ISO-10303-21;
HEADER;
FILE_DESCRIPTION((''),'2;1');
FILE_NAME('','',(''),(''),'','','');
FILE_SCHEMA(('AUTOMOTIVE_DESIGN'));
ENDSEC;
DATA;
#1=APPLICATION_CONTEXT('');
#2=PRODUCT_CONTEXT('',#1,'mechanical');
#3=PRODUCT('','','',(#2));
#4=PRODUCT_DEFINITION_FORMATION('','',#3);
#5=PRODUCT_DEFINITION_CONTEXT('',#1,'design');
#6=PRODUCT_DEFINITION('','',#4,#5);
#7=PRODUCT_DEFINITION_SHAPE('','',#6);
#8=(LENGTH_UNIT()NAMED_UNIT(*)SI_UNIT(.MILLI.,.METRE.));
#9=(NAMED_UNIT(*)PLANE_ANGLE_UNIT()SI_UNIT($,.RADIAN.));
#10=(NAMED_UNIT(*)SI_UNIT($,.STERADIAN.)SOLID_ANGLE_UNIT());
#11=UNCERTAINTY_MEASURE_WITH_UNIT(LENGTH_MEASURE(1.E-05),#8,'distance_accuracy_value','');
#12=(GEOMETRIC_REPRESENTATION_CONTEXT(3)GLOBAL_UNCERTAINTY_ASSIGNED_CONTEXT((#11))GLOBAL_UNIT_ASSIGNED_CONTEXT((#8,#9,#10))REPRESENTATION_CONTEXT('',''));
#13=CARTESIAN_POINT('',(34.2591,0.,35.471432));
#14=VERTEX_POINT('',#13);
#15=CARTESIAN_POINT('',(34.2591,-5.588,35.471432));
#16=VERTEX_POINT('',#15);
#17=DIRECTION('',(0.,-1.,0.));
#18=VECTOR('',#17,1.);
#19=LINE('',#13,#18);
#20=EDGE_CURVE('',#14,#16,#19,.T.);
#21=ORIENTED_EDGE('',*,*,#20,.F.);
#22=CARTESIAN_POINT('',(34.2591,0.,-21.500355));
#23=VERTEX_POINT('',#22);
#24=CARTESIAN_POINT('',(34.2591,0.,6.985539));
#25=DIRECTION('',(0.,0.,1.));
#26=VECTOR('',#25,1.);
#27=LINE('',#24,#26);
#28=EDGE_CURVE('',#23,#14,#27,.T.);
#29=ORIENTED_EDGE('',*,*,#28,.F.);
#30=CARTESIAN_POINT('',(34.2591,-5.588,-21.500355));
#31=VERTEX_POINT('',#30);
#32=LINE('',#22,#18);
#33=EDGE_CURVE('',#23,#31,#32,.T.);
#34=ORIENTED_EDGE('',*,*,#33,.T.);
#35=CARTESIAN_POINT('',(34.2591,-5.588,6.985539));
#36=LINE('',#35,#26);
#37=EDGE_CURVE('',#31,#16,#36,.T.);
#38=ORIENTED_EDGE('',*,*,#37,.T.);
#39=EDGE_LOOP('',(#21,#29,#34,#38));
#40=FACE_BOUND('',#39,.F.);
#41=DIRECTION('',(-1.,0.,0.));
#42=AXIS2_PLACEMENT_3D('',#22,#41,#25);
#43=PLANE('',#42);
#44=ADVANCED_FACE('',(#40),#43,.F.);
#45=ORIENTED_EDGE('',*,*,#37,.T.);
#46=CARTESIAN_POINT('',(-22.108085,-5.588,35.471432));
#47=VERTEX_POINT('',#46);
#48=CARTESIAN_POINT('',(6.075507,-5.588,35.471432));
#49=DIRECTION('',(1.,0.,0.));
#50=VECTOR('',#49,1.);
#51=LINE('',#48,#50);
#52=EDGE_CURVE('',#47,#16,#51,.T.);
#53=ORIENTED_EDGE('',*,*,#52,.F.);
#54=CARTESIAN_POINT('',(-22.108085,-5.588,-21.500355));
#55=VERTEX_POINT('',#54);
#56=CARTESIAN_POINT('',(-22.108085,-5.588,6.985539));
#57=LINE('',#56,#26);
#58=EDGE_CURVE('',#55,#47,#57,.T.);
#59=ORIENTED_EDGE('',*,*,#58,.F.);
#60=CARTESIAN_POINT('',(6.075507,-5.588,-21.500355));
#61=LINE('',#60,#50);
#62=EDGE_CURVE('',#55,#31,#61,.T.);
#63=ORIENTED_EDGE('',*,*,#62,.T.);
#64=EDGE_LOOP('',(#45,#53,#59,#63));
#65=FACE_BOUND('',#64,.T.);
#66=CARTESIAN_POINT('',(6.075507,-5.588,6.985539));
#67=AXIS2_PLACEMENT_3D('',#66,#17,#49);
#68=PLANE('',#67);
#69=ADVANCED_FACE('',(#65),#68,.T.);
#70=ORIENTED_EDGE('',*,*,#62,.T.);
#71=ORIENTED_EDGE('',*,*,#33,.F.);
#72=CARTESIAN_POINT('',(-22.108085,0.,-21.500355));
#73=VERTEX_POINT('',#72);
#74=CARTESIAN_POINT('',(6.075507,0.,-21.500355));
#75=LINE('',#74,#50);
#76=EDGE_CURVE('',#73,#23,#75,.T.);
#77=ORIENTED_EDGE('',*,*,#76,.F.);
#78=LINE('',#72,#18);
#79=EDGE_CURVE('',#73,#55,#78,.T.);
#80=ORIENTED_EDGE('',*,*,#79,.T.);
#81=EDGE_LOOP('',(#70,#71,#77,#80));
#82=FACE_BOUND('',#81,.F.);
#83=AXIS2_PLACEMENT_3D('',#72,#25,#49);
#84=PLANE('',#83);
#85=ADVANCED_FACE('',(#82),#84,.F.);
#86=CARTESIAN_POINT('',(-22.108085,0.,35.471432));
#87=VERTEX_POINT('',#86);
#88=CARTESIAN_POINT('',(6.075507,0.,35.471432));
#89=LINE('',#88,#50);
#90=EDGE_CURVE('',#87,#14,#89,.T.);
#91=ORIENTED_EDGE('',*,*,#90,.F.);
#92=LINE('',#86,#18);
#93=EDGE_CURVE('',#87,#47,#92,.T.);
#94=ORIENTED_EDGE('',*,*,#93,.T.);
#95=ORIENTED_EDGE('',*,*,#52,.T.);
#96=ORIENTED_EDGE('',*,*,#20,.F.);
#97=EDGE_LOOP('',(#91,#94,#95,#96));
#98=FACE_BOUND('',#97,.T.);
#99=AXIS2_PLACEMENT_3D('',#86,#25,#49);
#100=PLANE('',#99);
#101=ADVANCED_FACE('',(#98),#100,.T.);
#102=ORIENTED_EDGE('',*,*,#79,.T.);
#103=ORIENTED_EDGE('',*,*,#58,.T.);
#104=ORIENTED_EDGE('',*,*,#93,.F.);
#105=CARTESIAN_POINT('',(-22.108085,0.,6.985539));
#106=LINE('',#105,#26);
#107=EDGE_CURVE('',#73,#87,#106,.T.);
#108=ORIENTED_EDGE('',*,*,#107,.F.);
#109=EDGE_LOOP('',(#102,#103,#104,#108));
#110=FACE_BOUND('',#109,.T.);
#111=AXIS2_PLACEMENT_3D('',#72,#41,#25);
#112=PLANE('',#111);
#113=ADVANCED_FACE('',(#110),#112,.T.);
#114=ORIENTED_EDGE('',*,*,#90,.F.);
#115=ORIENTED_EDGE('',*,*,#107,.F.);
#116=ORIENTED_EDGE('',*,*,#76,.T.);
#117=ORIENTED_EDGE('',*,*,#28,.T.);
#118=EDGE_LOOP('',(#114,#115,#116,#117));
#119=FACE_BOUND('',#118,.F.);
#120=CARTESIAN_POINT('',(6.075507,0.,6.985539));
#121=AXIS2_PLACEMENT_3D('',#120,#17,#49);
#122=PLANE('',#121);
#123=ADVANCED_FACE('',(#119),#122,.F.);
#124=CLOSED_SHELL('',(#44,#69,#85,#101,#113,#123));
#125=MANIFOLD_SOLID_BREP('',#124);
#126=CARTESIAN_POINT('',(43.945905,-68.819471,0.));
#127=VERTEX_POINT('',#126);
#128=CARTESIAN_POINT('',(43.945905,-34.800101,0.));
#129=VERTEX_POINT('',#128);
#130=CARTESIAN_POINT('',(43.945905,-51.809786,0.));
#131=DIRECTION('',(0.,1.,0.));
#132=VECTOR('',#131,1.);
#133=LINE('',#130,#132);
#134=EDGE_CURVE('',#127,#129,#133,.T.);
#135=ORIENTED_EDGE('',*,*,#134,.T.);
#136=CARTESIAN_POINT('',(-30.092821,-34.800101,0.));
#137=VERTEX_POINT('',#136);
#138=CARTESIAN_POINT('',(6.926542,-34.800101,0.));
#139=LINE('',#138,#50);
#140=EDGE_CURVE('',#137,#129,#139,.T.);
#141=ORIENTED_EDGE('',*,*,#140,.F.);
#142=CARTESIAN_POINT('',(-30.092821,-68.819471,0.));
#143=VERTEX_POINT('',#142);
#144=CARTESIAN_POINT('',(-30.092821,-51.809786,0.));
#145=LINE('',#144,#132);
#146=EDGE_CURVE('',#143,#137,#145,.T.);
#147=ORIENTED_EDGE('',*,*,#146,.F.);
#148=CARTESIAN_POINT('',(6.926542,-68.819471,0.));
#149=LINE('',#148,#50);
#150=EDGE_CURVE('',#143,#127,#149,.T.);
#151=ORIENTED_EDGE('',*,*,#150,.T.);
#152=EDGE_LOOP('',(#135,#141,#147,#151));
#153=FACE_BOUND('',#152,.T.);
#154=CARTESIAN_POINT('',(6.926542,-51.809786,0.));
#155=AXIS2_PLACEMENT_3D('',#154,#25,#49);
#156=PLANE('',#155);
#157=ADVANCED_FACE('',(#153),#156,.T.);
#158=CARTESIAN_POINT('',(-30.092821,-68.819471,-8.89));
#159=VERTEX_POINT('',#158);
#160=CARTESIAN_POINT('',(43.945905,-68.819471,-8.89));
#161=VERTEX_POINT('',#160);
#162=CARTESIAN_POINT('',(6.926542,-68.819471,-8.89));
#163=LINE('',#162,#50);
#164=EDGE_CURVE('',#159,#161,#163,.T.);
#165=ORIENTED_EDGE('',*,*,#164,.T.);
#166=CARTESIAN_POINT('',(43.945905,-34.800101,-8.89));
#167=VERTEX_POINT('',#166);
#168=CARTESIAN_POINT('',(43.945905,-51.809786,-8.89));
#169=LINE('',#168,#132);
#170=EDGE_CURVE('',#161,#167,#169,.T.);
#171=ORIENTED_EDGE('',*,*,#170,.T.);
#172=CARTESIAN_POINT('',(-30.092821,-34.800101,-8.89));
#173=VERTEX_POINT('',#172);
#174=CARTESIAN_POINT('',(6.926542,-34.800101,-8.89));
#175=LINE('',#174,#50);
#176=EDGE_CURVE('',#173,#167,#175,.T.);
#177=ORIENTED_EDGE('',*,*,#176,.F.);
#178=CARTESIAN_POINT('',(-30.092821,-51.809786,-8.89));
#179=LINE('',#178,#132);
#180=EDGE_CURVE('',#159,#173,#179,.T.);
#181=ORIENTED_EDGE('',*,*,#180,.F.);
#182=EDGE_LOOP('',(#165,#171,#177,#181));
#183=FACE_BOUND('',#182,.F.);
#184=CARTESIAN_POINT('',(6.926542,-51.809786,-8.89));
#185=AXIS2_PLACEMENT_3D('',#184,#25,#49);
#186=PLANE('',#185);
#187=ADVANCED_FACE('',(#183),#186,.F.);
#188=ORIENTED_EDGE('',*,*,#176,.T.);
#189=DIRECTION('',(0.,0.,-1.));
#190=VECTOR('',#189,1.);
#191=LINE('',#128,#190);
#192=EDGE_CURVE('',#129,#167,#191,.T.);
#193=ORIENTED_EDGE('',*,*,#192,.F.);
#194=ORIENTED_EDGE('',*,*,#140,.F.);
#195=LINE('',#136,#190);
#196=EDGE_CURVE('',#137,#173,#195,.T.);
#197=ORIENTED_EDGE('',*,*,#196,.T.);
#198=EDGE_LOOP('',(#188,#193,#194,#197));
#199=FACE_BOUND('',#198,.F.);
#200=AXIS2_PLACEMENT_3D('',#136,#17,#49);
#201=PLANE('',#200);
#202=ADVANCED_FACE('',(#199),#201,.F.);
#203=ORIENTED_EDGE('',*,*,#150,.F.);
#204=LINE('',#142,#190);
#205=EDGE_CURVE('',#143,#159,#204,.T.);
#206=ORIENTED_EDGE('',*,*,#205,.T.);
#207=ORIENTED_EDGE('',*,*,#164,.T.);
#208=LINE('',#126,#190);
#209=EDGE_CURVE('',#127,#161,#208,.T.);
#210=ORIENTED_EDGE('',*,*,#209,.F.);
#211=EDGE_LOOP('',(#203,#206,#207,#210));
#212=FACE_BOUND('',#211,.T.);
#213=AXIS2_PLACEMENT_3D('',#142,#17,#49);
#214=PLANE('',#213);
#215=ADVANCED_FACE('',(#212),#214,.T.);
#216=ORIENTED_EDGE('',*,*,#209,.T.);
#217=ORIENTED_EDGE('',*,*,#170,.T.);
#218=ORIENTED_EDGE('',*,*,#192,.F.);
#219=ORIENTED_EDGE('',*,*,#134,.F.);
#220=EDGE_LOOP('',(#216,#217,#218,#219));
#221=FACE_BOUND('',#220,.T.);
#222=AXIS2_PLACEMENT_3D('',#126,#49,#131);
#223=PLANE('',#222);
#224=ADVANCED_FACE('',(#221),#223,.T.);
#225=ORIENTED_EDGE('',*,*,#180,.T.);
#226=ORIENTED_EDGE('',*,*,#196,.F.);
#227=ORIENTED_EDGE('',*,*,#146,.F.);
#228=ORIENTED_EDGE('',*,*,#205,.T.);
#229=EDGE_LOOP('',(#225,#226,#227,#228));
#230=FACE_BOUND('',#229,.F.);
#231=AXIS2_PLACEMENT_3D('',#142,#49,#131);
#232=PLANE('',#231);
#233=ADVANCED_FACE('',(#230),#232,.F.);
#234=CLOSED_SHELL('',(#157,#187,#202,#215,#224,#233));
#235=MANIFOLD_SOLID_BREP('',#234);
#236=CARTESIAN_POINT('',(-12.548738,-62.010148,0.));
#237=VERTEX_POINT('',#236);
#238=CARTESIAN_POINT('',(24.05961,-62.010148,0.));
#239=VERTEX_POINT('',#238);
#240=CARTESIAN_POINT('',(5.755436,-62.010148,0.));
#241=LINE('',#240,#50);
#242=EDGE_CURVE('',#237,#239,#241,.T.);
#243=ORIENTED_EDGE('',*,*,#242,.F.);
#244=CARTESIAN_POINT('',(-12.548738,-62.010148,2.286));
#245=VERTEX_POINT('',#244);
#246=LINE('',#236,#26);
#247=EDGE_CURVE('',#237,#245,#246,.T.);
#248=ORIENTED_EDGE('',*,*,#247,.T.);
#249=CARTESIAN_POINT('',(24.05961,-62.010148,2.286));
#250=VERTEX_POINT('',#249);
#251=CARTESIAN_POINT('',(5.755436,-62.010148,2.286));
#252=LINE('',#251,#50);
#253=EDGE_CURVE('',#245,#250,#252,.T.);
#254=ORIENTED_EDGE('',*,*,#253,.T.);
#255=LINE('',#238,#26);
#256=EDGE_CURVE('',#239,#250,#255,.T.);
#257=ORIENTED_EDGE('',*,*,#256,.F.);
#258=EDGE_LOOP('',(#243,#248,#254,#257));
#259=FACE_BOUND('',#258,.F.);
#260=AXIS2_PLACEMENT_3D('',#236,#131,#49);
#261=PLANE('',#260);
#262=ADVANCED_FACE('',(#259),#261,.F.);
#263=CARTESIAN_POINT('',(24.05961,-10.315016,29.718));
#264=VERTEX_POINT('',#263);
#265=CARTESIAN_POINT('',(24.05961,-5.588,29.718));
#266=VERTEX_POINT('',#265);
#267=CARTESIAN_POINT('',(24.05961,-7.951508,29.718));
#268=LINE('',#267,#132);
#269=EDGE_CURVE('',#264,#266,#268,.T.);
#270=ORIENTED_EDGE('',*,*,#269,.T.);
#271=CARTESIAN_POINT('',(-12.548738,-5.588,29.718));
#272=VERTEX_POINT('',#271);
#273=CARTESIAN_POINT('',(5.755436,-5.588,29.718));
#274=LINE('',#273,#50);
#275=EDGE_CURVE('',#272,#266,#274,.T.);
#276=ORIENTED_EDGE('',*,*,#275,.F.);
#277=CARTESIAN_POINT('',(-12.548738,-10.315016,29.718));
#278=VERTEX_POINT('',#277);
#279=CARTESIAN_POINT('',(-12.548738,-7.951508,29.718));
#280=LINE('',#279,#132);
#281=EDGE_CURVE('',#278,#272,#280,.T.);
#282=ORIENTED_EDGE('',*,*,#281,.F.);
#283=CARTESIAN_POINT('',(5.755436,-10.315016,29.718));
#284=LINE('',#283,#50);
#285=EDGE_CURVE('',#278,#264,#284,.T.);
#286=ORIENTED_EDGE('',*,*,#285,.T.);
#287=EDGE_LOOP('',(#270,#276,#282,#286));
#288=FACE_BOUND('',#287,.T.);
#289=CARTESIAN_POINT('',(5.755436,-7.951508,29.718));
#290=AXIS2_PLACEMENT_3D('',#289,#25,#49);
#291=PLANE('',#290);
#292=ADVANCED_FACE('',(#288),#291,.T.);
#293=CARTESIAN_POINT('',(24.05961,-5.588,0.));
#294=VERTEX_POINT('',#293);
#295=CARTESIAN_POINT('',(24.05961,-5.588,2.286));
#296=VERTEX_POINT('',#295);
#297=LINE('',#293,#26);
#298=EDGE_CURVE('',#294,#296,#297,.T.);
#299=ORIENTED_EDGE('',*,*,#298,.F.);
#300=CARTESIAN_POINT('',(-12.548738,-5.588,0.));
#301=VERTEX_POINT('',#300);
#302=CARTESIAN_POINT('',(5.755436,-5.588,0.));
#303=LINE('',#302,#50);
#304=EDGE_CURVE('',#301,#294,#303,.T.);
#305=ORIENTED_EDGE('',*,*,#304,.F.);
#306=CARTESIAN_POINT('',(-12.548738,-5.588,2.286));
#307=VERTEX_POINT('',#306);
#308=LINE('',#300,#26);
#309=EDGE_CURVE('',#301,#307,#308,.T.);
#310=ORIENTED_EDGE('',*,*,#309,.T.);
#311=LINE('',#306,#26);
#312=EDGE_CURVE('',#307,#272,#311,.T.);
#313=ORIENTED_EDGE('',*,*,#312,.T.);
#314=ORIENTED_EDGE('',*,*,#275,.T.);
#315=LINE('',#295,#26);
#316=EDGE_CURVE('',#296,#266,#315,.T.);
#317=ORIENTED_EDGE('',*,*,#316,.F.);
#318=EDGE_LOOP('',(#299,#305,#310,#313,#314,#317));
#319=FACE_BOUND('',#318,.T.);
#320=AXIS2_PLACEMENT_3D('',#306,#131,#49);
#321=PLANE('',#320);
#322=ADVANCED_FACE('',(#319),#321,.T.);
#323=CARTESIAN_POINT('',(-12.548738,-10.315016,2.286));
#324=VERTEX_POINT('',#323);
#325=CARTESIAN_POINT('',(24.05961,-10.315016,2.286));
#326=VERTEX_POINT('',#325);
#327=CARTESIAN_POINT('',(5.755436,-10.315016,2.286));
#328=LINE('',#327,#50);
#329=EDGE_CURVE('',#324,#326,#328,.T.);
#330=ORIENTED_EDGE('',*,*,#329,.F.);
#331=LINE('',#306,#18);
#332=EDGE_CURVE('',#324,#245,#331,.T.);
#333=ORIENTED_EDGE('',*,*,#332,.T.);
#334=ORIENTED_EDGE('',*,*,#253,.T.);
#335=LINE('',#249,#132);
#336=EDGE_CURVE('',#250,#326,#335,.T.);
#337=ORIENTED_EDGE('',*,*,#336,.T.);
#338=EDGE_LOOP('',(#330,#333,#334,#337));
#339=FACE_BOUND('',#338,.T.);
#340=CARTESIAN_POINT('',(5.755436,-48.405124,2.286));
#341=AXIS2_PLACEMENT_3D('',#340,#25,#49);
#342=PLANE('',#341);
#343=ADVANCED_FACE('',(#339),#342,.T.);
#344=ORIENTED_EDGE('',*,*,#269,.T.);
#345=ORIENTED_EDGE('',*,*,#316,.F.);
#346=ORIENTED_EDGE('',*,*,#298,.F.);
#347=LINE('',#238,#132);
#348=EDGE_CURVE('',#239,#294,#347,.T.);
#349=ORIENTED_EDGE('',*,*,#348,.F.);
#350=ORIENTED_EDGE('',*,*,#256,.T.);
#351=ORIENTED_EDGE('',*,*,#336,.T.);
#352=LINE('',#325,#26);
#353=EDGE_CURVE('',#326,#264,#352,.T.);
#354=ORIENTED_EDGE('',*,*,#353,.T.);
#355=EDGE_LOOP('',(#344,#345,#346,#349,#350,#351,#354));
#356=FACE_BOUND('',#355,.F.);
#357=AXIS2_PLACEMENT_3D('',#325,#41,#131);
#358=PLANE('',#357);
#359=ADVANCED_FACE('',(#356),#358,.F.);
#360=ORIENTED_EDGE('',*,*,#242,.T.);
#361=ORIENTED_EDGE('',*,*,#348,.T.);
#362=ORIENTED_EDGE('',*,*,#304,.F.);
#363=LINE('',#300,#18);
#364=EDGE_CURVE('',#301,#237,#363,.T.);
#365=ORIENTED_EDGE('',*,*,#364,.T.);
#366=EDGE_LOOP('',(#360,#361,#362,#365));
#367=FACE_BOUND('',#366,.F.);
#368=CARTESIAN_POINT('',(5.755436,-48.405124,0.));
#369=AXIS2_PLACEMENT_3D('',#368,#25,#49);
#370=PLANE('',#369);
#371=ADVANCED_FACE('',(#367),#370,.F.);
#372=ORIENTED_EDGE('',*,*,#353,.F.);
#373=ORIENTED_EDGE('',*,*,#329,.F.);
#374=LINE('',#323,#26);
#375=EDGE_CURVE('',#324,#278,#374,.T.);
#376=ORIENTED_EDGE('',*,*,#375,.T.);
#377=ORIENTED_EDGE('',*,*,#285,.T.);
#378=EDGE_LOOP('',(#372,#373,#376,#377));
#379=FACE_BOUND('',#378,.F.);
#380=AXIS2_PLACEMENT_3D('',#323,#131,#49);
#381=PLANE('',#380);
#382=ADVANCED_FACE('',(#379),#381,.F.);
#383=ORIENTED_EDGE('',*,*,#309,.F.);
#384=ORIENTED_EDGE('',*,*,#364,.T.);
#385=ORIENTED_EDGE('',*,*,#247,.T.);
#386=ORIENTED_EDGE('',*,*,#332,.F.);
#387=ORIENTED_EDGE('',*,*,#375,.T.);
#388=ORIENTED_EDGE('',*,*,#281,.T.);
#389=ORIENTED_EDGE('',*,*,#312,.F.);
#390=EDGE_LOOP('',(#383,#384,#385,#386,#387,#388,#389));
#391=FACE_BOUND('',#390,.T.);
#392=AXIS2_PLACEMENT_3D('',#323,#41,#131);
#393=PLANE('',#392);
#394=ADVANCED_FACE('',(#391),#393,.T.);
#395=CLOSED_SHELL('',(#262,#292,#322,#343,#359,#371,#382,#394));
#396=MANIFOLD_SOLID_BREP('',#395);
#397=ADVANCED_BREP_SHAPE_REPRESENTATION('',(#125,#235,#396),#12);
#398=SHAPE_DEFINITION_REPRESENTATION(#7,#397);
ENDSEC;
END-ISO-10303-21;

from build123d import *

# Parameters (mm, degrees)
F0_W     = 56.3671849668
F0_H     = 56.9717865437
F1_DEPTH = 5.588
F2_W     = 74.0387253463
F2_H     = 34.019369632
F3_DEPTH = 8.89
F4_W     = 36.6083486006
F4_H     = 27.2100468283
F4_H_2   = 29.2121010716
F5_DEPTH = 2.286
F6_W     = 36.6083486006
F6_H     = 4.7270159121
F7_DEPTH = 27.432


with BuildPart() as f1:
    # F0 (on Front) → F1 (new body)
    with BuildSketch(Plane.XZ):
        with Locations((6.0755070299, 6.9855386391)):
            Rectangle(F0_W, F0_H)
    extrude(amount=F1_DEPTH)


with BuildPart() as f3:
    # F2 (on Top) → F3 (new body)
    with BuildSketch(Plane.XY):
        with Locations((6.926542148, -51.8097858876)):
            Rectangle(F2_W, F2_H)
    extrude(amount=-F3_DEPTH)


with BuildPart() as f5:
    # F4 (on face) → F5 (new body)
    with BuildSketch(Plane.XY):
        with Locations((5.755436141, -48.4051244857)):
            Rectangle(F4_W, F4_H)
        with Locations((5.755436141, -20.1940505358)):
            Rectangle(F4_W, F4_H_2)
    extrude(amount=F5_DEPTH)

    # F6 (on face) → F7 (join)
    with BuildSketch(Plane.XY.offset(2.286)):
        with Locations((5.755436141, -7.951507956)):
            Rectangle(F6_W, F6_H)
    extrude(amount=F7_DEPTH)


solid = Compound([f1.part, f3.part, f5.part])
